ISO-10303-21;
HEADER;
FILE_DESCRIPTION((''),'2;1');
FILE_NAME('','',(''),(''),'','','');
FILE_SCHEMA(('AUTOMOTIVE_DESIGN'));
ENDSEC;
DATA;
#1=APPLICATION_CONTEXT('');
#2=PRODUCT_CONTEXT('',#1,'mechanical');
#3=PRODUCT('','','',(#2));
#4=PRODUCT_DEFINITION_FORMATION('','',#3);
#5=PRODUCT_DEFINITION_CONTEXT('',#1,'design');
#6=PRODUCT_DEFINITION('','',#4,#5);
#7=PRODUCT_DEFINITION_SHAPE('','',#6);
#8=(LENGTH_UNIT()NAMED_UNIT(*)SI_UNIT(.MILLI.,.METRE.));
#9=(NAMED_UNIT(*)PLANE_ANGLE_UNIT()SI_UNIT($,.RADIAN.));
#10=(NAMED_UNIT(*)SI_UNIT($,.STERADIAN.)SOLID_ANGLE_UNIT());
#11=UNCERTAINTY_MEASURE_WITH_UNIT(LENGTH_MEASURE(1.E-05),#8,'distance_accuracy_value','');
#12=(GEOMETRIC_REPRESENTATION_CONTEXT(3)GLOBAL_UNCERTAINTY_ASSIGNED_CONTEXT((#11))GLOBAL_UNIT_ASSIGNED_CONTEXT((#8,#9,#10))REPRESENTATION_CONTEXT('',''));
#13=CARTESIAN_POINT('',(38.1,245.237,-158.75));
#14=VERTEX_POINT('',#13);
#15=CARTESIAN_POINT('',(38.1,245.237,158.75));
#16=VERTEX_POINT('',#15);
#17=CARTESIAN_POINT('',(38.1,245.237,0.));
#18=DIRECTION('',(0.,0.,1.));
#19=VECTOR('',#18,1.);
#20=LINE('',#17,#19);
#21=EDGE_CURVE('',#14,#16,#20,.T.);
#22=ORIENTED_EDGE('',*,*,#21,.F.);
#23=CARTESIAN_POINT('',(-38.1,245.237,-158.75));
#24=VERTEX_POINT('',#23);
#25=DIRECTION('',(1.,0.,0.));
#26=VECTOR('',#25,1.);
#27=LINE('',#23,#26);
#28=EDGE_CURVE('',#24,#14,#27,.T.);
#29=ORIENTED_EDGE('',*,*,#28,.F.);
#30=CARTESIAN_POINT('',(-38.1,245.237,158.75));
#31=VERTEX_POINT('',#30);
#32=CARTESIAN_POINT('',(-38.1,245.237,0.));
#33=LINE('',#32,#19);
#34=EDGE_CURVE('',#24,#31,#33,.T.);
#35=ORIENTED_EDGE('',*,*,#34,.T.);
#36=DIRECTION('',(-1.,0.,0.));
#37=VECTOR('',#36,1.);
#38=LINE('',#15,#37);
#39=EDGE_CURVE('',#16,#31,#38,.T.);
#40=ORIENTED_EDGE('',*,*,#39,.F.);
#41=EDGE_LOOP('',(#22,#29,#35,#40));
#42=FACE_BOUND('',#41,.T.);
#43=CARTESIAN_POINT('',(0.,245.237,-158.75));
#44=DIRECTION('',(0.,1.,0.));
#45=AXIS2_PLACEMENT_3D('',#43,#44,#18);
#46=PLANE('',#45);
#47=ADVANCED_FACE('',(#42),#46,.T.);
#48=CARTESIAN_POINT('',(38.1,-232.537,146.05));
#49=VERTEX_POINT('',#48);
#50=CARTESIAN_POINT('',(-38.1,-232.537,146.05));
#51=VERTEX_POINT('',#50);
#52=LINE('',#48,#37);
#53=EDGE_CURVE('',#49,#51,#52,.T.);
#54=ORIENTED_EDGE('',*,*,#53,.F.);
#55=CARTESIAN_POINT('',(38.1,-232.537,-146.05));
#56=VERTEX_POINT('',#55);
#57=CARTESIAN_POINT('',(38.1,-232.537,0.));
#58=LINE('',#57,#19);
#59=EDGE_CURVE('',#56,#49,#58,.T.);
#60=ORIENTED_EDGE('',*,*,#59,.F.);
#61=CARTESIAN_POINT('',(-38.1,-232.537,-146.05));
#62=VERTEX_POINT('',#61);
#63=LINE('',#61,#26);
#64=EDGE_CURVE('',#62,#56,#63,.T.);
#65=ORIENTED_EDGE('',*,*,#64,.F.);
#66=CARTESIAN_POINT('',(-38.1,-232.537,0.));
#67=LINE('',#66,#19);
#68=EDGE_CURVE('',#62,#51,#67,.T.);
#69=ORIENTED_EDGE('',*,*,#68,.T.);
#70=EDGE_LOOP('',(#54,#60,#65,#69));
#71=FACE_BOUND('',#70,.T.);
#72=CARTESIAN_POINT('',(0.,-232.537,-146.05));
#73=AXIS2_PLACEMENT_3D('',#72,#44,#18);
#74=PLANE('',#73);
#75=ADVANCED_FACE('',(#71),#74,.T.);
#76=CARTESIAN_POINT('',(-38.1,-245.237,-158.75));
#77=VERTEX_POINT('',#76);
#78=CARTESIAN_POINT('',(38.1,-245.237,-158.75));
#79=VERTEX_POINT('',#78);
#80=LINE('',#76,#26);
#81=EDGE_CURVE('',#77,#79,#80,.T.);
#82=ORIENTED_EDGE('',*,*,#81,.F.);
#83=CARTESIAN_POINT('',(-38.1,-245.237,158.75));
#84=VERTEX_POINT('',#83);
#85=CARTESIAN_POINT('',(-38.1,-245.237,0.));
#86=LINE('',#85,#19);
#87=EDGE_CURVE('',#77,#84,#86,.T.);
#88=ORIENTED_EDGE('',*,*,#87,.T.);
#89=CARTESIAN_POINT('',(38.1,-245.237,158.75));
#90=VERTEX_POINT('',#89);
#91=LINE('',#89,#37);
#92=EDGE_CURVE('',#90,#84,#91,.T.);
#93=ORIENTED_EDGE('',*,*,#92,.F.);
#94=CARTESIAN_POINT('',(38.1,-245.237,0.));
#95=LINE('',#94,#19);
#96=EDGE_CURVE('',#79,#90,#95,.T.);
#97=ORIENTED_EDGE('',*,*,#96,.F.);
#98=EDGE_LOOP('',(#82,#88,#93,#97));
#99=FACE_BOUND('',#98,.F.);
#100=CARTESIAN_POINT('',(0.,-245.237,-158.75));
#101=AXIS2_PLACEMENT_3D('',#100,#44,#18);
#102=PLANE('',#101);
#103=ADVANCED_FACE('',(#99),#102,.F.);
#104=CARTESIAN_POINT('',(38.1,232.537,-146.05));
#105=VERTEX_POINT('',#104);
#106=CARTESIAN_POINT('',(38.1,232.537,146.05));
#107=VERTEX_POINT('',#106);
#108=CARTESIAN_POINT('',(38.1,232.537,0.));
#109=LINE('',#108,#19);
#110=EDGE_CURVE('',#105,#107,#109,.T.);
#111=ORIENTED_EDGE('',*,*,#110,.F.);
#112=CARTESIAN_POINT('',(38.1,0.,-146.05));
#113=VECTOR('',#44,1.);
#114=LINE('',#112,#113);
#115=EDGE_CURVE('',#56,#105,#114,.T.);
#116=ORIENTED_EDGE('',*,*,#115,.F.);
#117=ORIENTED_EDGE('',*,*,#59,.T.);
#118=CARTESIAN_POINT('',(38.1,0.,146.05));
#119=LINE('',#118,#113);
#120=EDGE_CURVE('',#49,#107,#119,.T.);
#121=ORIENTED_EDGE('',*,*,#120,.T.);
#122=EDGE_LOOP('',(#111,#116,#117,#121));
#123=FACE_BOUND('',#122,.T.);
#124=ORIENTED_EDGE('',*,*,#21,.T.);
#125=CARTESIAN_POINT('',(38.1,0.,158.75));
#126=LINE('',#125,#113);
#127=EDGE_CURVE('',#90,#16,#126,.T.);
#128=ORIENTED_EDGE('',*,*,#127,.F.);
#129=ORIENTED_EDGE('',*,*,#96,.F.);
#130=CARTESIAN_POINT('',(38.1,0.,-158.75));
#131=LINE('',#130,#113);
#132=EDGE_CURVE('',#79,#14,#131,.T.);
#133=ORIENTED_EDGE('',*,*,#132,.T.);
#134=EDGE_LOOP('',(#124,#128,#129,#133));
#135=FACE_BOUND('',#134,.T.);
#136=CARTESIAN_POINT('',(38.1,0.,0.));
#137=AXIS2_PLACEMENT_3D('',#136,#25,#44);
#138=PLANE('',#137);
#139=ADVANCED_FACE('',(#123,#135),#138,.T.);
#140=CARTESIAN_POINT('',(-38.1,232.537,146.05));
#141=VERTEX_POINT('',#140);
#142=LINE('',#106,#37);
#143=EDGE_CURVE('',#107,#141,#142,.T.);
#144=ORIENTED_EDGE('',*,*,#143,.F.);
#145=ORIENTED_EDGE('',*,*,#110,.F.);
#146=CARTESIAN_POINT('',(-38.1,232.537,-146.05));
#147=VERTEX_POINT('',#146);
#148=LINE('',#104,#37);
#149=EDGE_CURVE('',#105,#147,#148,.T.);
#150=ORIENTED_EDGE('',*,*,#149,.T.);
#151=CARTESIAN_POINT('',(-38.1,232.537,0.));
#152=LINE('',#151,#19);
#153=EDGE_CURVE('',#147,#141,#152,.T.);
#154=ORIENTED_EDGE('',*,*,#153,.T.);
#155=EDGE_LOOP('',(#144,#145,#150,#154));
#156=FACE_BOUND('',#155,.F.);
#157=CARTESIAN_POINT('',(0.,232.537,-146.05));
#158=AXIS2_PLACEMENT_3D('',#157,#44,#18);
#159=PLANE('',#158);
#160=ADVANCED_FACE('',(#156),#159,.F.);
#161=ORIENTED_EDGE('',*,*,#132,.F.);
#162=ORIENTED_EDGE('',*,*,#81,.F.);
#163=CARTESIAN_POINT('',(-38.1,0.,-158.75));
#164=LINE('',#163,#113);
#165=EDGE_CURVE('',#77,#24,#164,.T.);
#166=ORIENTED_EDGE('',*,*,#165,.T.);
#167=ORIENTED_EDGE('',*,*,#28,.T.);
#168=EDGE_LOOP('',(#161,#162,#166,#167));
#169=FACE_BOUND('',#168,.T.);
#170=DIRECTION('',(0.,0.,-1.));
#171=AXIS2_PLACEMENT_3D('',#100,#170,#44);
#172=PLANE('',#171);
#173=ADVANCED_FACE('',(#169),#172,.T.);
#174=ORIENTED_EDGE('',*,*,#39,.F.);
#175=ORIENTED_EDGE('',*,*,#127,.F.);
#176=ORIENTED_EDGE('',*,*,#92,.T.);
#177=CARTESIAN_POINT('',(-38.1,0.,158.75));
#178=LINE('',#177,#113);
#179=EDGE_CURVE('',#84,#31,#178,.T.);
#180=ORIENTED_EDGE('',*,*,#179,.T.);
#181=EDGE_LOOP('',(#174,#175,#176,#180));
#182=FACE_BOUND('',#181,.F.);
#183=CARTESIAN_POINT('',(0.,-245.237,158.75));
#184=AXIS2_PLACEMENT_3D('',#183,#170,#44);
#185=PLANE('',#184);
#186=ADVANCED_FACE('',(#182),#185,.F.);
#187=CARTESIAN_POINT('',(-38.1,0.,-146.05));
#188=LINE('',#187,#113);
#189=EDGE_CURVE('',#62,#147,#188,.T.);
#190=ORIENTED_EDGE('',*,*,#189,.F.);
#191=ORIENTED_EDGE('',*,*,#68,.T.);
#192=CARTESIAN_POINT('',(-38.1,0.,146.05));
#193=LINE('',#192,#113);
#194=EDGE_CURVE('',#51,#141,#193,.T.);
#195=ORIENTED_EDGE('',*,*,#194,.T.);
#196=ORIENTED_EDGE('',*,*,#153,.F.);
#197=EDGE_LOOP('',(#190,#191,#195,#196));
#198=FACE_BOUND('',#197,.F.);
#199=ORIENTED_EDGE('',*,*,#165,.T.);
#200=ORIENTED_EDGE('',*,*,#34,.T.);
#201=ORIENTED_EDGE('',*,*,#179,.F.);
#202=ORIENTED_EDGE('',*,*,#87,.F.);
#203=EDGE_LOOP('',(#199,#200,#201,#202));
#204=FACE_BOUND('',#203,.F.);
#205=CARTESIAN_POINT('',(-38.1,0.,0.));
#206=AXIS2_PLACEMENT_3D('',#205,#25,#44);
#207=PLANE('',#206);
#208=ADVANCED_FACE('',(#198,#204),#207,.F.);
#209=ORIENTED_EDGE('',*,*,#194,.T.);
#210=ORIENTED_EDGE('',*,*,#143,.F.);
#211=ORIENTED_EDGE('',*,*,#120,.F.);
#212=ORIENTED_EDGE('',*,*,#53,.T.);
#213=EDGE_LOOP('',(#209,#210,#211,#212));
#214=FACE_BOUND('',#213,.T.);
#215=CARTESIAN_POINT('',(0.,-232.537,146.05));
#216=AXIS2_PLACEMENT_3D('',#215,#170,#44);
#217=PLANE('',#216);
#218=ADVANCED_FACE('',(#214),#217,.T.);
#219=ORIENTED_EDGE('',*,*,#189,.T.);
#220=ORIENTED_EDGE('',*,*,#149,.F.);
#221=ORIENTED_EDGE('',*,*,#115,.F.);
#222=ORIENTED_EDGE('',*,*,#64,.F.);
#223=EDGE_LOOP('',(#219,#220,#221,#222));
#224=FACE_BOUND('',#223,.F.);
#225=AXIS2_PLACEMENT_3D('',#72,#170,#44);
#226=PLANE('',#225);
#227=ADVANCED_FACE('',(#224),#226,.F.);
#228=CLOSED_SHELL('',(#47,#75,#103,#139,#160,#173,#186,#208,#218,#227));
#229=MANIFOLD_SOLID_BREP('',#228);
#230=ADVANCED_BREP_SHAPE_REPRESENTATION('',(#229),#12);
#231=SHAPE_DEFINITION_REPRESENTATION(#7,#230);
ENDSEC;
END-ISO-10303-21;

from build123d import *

# Parameters (mm, degrees)
F0_W     = 490.474
F0_H     = 317.5
F0_W_2   = 465.074
F0_H_2   = 292.1
F1_DEPTH = 38.1


# Not quite as in the source:
# - the program builds the solid bodies; features that only make, move or delete a surface that nothing else refers to are left out


with BuildPart() as f1:
    # F0 (on Right) → F1 (new body, symmetric)
    with BuildSketch(Plane.YZ):
        Rectangle(F0_W, F0_H)
        Rectangle(F0_W_2, F0_H_2, mode=Mode.SUBTRACT)
    extrude(amount=F1_DEPTH, both=True)


solid = f1.part
